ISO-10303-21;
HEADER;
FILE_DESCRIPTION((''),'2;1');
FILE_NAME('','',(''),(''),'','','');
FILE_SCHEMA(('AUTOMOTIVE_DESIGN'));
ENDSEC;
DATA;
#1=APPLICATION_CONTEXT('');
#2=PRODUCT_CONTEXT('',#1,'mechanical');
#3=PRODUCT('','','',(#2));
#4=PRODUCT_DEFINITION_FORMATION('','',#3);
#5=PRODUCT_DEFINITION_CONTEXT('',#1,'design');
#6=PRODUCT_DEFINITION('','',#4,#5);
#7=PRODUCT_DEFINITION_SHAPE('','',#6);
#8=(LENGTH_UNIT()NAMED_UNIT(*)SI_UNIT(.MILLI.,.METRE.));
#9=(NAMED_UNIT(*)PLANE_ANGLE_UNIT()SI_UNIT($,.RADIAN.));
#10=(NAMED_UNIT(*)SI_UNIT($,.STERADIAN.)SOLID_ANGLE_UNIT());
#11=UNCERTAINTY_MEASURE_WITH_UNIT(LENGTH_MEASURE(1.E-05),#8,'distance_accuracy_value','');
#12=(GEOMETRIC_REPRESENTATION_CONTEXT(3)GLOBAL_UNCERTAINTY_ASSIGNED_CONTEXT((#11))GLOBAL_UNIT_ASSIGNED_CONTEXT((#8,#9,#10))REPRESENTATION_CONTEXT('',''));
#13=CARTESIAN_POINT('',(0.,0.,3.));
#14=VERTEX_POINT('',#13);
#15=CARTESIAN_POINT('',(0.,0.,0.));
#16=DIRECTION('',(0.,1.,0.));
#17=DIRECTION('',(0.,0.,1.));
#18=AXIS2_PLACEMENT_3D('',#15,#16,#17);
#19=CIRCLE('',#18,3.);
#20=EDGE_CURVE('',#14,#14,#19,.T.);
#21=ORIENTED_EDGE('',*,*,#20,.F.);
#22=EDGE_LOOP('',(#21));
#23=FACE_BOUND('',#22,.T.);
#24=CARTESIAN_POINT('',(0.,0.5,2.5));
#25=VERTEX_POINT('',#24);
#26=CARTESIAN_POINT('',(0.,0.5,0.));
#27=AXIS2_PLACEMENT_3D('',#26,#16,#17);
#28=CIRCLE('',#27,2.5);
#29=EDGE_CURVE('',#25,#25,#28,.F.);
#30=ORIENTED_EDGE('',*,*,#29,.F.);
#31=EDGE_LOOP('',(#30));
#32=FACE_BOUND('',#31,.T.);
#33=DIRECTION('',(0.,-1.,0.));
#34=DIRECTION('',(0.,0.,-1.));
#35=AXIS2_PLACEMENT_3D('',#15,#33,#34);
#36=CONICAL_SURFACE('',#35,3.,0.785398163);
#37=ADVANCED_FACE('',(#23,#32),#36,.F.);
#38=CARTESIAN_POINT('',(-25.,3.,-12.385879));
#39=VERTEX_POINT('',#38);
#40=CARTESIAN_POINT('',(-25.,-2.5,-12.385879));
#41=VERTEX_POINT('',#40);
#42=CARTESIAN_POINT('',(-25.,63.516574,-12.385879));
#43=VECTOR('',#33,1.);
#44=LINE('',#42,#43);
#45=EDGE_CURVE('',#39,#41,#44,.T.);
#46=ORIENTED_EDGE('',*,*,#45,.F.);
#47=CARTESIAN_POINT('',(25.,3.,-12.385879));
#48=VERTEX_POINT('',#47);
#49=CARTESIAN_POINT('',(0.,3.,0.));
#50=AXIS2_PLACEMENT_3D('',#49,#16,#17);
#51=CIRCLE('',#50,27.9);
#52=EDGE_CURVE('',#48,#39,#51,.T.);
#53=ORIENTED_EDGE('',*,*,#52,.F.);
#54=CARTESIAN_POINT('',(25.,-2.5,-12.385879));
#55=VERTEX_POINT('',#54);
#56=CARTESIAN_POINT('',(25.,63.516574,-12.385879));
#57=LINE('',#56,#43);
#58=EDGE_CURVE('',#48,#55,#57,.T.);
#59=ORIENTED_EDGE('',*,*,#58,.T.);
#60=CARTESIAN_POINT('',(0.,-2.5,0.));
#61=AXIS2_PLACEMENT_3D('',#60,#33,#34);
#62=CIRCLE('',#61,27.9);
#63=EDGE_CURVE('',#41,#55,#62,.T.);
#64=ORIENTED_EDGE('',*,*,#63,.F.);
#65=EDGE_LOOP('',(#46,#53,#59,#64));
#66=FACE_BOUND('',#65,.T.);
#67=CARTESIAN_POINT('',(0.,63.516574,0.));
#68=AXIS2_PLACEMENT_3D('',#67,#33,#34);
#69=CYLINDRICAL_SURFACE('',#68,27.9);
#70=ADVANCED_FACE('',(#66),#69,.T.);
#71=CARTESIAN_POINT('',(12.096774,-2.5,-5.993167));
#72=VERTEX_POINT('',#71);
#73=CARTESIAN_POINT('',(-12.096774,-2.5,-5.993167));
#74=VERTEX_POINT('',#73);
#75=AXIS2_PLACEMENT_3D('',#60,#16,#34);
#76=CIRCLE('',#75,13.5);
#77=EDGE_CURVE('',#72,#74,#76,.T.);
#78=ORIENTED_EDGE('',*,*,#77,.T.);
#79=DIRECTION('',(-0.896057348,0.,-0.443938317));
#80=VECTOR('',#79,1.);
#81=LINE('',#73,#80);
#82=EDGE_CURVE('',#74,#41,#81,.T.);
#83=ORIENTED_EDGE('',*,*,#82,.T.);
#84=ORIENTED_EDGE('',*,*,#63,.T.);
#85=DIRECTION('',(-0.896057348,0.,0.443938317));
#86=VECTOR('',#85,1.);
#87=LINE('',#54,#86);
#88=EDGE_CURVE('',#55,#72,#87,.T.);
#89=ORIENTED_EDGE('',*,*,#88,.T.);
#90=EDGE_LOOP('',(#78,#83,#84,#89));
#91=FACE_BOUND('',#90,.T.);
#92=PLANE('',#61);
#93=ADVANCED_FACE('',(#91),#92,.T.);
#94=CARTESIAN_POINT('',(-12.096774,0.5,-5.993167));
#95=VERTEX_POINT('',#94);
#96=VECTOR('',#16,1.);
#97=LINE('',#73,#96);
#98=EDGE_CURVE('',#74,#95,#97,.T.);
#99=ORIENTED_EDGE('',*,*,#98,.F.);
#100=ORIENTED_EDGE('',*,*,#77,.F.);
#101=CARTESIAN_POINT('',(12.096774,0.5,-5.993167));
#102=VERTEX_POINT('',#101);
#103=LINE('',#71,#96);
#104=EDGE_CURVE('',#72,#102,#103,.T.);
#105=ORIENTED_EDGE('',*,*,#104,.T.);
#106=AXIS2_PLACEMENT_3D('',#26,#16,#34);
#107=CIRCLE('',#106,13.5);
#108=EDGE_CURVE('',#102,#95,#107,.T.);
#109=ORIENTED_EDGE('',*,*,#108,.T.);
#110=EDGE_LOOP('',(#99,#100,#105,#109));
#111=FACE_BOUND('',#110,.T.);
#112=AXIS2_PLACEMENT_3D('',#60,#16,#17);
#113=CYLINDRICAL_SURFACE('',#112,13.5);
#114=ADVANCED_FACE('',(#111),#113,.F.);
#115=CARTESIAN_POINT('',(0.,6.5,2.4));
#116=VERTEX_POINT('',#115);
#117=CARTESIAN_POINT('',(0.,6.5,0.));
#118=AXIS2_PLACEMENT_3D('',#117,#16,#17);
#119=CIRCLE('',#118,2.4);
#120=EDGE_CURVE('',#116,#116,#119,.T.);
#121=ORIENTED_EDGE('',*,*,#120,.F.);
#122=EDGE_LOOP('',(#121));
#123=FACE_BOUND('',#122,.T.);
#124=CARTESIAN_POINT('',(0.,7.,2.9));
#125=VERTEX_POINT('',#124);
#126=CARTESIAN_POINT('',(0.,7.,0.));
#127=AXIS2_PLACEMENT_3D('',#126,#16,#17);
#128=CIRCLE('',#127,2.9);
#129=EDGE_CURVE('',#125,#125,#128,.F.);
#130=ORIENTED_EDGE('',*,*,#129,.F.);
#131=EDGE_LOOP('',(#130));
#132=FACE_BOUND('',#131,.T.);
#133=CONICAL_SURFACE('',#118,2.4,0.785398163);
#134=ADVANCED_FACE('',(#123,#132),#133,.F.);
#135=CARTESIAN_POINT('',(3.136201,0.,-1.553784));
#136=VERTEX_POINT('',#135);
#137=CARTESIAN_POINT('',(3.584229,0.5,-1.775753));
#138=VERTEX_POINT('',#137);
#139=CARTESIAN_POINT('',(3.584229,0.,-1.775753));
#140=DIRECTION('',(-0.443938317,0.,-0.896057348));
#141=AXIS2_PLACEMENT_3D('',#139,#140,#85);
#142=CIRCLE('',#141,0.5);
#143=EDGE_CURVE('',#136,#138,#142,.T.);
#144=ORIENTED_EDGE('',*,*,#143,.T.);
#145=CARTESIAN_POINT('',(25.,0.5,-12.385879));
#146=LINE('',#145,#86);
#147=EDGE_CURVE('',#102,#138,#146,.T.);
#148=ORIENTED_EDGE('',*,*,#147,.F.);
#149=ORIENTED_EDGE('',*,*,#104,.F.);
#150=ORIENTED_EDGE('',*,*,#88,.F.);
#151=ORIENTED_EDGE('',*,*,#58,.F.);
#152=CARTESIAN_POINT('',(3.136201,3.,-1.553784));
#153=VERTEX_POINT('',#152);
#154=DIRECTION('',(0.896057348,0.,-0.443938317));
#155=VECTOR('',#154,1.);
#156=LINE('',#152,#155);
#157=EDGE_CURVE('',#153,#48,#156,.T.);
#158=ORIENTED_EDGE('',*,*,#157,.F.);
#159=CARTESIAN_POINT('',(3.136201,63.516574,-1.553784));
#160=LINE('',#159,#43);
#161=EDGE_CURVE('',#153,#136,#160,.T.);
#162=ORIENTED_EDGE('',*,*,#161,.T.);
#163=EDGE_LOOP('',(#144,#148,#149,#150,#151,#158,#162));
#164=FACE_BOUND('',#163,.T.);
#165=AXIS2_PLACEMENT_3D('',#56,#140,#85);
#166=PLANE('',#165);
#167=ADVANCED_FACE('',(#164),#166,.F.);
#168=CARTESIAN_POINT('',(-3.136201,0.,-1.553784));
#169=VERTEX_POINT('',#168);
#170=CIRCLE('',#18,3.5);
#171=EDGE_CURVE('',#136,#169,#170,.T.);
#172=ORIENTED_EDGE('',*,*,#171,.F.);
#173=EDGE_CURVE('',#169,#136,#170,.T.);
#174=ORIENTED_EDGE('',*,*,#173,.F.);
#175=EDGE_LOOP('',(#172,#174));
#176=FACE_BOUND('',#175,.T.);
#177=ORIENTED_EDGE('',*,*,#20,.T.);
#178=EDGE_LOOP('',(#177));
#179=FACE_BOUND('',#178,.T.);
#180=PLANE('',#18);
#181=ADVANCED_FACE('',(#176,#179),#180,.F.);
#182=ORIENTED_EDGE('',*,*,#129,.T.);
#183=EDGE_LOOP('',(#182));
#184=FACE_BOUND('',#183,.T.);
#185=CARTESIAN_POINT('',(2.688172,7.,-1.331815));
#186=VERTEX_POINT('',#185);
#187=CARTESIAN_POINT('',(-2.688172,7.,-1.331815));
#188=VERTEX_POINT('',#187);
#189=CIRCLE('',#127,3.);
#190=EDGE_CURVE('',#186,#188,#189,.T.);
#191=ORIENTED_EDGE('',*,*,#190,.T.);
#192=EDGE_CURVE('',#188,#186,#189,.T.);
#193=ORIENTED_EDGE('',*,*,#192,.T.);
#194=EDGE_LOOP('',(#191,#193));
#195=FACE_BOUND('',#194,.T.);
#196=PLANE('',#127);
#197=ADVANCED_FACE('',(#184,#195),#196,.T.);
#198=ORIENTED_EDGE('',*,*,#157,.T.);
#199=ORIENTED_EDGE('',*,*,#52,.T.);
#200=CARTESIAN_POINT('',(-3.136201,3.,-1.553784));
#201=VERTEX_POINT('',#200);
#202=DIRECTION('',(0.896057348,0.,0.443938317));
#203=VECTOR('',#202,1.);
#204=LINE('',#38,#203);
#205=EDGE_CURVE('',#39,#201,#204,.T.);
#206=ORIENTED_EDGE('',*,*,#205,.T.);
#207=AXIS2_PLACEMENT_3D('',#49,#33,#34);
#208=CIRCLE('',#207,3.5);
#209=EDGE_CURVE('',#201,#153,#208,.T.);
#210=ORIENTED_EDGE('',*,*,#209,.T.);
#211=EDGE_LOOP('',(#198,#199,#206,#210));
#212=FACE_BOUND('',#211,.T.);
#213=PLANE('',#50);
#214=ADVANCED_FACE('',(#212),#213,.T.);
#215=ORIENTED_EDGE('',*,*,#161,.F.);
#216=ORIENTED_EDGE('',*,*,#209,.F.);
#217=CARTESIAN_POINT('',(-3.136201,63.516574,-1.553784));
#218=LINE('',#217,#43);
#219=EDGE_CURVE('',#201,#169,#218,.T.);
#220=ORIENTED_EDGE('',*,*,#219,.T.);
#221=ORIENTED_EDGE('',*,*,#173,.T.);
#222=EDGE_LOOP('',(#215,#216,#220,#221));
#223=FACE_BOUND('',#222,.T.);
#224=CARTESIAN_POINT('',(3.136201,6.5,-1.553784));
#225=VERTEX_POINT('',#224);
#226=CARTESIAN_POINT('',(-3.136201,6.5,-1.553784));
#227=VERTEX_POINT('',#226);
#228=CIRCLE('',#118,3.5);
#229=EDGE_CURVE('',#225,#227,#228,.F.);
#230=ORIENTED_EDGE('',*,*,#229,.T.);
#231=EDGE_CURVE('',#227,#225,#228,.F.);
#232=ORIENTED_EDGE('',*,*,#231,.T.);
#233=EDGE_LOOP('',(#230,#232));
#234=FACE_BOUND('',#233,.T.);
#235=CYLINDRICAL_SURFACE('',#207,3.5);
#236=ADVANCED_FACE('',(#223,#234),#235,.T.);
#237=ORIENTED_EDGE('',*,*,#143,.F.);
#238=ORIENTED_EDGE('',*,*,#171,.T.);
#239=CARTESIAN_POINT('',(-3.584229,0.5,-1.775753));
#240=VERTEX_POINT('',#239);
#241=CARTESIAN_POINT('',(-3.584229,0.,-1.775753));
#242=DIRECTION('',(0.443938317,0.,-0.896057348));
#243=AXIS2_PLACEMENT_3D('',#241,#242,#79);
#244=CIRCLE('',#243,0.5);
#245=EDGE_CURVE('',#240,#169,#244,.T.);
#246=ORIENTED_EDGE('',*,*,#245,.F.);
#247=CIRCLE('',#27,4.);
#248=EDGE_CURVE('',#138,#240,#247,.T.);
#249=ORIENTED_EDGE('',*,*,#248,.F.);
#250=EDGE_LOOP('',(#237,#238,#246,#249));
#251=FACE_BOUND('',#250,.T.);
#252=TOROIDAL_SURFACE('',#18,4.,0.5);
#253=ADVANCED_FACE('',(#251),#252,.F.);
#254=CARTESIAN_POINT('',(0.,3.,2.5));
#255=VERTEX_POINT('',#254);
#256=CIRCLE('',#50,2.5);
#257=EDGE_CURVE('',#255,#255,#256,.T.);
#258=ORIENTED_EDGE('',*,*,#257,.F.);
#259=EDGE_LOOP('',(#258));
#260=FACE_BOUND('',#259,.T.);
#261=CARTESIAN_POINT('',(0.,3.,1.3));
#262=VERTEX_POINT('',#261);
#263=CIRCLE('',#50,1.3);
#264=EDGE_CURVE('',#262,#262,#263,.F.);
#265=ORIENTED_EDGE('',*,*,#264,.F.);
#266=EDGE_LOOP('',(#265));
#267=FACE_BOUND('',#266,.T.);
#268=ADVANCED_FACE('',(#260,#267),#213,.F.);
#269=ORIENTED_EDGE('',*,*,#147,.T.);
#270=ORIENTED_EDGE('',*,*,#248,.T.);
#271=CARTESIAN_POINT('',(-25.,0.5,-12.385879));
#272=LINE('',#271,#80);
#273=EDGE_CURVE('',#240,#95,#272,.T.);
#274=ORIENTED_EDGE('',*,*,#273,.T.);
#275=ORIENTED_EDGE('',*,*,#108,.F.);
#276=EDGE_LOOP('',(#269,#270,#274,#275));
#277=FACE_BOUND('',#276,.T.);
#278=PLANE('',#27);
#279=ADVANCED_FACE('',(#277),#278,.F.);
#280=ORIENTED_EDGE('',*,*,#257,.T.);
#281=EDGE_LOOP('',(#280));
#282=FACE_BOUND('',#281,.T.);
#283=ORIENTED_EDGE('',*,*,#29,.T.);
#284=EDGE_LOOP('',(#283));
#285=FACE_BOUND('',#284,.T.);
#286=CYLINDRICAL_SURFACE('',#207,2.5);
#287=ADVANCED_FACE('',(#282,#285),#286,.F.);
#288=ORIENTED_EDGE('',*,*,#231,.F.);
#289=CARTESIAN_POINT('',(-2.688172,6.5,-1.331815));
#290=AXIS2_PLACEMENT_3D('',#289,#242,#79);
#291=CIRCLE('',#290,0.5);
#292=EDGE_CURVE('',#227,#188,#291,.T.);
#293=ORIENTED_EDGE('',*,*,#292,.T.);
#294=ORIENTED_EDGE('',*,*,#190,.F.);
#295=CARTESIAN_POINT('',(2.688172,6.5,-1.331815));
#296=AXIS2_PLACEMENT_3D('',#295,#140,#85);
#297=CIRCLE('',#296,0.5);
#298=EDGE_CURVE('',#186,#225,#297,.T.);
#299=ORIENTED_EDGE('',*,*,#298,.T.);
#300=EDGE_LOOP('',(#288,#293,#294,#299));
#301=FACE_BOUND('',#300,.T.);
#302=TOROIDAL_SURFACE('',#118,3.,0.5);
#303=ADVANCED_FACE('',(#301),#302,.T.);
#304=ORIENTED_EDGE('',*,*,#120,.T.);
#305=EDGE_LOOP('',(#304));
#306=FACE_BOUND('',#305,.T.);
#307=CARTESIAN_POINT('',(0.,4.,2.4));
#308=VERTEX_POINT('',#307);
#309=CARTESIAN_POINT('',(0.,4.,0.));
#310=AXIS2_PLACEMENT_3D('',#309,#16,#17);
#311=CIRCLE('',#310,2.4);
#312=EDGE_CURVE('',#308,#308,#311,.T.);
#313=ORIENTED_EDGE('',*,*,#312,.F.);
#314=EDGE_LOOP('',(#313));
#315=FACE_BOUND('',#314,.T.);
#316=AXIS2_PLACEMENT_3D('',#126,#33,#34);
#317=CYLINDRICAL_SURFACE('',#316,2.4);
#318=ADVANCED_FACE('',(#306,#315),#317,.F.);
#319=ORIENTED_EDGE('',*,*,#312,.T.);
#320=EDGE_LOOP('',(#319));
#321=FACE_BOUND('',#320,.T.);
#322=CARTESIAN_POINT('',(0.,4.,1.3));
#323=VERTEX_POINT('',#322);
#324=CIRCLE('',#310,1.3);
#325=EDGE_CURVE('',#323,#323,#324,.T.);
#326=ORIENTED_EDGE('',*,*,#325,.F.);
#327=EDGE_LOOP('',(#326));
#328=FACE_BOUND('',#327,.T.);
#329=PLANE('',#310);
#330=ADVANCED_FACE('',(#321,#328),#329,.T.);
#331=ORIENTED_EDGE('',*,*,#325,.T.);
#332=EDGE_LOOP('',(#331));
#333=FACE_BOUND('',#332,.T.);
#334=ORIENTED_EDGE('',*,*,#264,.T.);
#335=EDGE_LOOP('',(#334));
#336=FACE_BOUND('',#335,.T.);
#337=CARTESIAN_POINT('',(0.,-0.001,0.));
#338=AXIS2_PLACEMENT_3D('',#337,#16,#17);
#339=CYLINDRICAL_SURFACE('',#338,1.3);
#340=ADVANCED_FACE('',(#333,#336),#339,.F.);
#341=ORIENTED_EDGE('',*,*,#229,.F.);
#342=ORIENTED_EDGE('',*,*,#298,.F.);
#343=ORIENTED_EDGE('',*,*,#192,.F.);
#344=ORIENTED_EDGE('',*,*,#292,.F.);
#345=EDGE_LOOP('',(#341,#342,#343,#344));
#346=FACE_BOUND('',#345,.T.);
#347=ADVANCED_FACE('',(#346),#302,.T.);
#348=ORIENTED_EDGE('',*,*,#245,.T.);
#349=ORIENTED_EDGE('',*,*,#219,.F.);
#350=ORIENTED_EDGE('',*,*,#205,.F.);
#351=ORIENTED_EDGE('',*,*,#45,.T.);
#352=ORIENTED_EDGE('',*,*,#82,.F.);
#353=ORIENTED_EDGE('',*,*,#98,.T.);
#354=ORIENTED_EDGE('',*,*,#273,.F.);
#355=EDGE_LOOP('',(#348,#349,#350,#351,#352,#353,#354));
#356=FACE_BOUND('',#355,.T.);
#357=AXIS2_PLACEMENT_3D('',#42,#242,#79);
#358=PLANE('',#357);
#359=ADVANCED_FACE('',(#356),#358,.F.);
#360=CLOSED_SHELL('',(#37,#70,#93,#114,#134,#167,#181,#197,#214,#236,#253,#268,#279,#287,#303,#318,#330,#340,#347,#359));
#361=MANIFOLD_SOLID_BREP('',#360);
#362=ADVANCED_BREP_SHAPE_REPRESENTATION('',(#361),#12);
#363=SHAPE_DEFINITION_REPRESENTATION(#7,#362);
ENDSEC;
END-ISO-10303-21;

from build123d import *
from build123d.topology import SkipClean

# Parameters (mm, degrees)
SKETCH1_R                = 3.5
SKETCH1_R_2              = 2.5
BOSS_EXTRUDE1_DEPTH      = 3
SKETCH2_R                = 3.5
BOSS_EXTRUDE2_DEPTH      = 1
CUT_EXTRUDE1_REACH       = 8.364
SKETCH3_R                = 1.3
SKETCH4_R                = 3.5
SKETCH4_R_2              = 2.4
BOSS_EXTRUDE3_DEPTH      = 3
CHAMFER1_SIZE            = 0.5
BOSS_EXTRUDE5_DEPTH      = 3.5
BOSS_EXTRUDE5_DEPTH_BACK = 3
FILLET1_R                = 0.5
BOSS_EXTRUDE6_START      = 3
BOSS_EXTRUDE6_DEPTH      = 3
CUT_EXTRUDE2_START       = -4
CUT_EXTRUDE2_DEPTH       = 4
FILLET3_R                = 0.5


# Some blends are built 0.0001 mm under size
with BuildPart() as part:
    # Sketch1 → Boss-Extrude1 (new body)
    with BuildSketch(Plane(origin=(0, 0, 0), x_dir=(1, 0, 0), z_dir=(0, 1, 0))):
        with Locations(Location((0, 0, 0), (0, 0, 270))):
            Circle(SKETCH1_R)
        with Locations(Location((0, 0, 0), (0, 0, 270))):
            Circle(SKETCH1_R_2, mode=Mode.SUBTRACT)
    extrude(amount=BOSS_EXTRUDE1_DEPTH)

    # Sketch2 → Boss-Extrude2 (add)
    with BuildSketch(Plane(origin=(0, 3, 0), x_dir=(1, 0, 0), z_dir=(0, 1, 0))):
        with Locations(Location((0, 0, 0), (0, 0, 270))):
            Circle(SKETCH2_R)
    extrude(amount=BOSS_EXTRUDE2_DEPTH)

    # Sketch3 → Cut-Extrude1 (cut, up to next)
    with BuildSketch(Plane(origin=(0, 4, 0), x_dir=(1, 0, 0), z_dir=(0, 1, 0)), mode=Mode.PRIVATE) as cut_extrude1_sk1:
        with Locations(Location((0, 0, 0), (0, 0, 270))):
            Circle(SKETCH3_R)
    cut_extrude1_tool1 = extrude(cut_extrude1_sk1.sketch, amount=-CUT_EXTRUDE1_REACH, mode=Mode.PRIVATE) & part.part
    add(cut_extrude1_tool1.solids().sort_by_distance((0, 4, 0))[0], mode=Mode.SUBTRACT)

    # Sketch4 → Boss-Extrude3 (add)
    with BuildSketch(Plane(origin=(0, 4, 0), x_dir=(1, 0, 0), z_dir=(0, 1, 0))):
        with Locations(Location((0, 0, 0), (0, 0, 270))):
            Circle(SKETCH4_R)
        with Locations(Location((0, 0, 0), (0, 0, 270))):
            Circle(SKETCH4_R_2, mode=Mode.SUBTRACT)
    extrude(amount=BOSS_EXTRUDE3_DEPTH)

    # Chamfer1
    chamfer1_edges = [part.edges().sort_by_distance(p)[0] for p in [
        (0, 7, -2.4),
        (0, 0, -2.5),
    ]]
    chamfer(chamfer1_edges, length=CHAMFER1_SIZE)

    # Sketch6 → Boss-Extrude5 (add, two sides: drawn at the far end of the back side and taken through both)
    with BuildSketch(Plane(origin=(0, 3.5, 0), x_dir=(1, 0, 0), z_dir=(0, 1, 0)).offset(-BOSS_EXTRUDE5_DEPTH_BACK)):
        with BuildLine():
            Line((-25, 12.385879056), (-3.136200717, 1.553784111))
            ThreePointArc((-3.136200717, 1.553784111), (0, 3.5), (3.136200717, 1.553784111))
            Line((3.136200717, 1.553784111), (25, 12.385879056))
            ThreePointArc((25, 12.385879056), (0, 27.9), (-25, 12.385879056))
        make_face()
    extrude(amount=BOSS_EXTRUDE5_DEPTH + BOSS_EXTRUDE5_DEPTH_BACK)

    # Fillet1
    fillet1_edges = [part.edges().sort_by_distance(p)[0] for p in [
        (-2.973906891, 7, 1.845502047),
        (0, 0.5, -3.5),
    ]]
    fillet(fillet1_edges, radius=FILLET1_R - 0.0001)  # a hair under: the kernel refuses the full size

    # Sketch7 → Boss-Extrude6 (add)
    with BuildSketch(Plane.XZ.offset(-0.5).offset(BOSS_EXTRUDE6_START)):
        with BuildLine():
            Line((25, -12.385879056), (12.096774194, -5.993167285))
            ThreePointArc((12.096774194, -5.993167285), (0, -13.5), (-12.096774194, -5.993167285))
            Line((-12.096774194, -5.993167285), (-25, -12.385879056))
            ThreePointArc((-25, -12.385879056), (0, -27.9), (25, -12.385879056))
        make_face()
    extrude(amount=-BOSS_EXTRUDE6_DEPTH)

    # Sketch8 → Cut-Extrude2 (cut)
    with SkipClean():  # the faces are left unmerged after this step: merging them gives an invalid solid
        with BuildSketch(Plane(origin=(0, 7, 0), x_dir=(1, 0, 0), z_dir=(0, 1, 0)).offset(CUT_EXTRUDE2_START)):
            with BuildLine():
                Line((3.136200717, 1.553784111), (25, 12.385879056))
                ThreePointArc((25, 12.385879056), (0, 27.9), (-25, 12.385879056))
                Line((-25, 12.385879056), (-3.136200717, 1.553784111))
                ThreePointArc((-3.136200717, 1.553784111), (0, 3.5), (3.136200717, 1.553784111))
            make_face()
        extrude(amount=CUT_EXTRUDE2_DEPTH, mode=Mode.SUBTRACT)

    # Fillet3
    # the kernel refuses this fillet: 0.5 mm, written as the material it takes off along each edge
    with BuildSketch(Plane(origin=(0, 7, 0), x_dir=(-0.8960573476702508, 0, -0.44393831743402734), z_dir=(-0.44393831743402734, 0, 0.8960573476702508))) as fillet3_piece_1:
        with BuildLine():
            CenterArc((3.5 - FILLET3_R, FILLET3_R), FILLET3_R, 270, 90)
            Line((3.5, FILLET3_R), (3.5 + FILLET3_R * 0.02, FILLET3_R))
            Line((3.5 + FILLET3_R * 0.02, FILLET3_R), (3.5 + FILLET3_R * 0.02, -FILLET3_R * 0.02))
            Line((3.5 + FILLET3_R * 0.02, -FILLET3_R * 0.02), (3.5 - FILLET3_R, -FILLET3_R * 0.02))
            Line((3.5 - FILLET3_R, -FILLET3_R * 0.02), (3.5 - FILLET3_R, 0))
        make_face()
    revolve(axis=Axis((0, 7, 0), (0, -1, 0)), revolution_arc=127.289134778, mode=Mode.SUBTRACT)


solid = part.part
